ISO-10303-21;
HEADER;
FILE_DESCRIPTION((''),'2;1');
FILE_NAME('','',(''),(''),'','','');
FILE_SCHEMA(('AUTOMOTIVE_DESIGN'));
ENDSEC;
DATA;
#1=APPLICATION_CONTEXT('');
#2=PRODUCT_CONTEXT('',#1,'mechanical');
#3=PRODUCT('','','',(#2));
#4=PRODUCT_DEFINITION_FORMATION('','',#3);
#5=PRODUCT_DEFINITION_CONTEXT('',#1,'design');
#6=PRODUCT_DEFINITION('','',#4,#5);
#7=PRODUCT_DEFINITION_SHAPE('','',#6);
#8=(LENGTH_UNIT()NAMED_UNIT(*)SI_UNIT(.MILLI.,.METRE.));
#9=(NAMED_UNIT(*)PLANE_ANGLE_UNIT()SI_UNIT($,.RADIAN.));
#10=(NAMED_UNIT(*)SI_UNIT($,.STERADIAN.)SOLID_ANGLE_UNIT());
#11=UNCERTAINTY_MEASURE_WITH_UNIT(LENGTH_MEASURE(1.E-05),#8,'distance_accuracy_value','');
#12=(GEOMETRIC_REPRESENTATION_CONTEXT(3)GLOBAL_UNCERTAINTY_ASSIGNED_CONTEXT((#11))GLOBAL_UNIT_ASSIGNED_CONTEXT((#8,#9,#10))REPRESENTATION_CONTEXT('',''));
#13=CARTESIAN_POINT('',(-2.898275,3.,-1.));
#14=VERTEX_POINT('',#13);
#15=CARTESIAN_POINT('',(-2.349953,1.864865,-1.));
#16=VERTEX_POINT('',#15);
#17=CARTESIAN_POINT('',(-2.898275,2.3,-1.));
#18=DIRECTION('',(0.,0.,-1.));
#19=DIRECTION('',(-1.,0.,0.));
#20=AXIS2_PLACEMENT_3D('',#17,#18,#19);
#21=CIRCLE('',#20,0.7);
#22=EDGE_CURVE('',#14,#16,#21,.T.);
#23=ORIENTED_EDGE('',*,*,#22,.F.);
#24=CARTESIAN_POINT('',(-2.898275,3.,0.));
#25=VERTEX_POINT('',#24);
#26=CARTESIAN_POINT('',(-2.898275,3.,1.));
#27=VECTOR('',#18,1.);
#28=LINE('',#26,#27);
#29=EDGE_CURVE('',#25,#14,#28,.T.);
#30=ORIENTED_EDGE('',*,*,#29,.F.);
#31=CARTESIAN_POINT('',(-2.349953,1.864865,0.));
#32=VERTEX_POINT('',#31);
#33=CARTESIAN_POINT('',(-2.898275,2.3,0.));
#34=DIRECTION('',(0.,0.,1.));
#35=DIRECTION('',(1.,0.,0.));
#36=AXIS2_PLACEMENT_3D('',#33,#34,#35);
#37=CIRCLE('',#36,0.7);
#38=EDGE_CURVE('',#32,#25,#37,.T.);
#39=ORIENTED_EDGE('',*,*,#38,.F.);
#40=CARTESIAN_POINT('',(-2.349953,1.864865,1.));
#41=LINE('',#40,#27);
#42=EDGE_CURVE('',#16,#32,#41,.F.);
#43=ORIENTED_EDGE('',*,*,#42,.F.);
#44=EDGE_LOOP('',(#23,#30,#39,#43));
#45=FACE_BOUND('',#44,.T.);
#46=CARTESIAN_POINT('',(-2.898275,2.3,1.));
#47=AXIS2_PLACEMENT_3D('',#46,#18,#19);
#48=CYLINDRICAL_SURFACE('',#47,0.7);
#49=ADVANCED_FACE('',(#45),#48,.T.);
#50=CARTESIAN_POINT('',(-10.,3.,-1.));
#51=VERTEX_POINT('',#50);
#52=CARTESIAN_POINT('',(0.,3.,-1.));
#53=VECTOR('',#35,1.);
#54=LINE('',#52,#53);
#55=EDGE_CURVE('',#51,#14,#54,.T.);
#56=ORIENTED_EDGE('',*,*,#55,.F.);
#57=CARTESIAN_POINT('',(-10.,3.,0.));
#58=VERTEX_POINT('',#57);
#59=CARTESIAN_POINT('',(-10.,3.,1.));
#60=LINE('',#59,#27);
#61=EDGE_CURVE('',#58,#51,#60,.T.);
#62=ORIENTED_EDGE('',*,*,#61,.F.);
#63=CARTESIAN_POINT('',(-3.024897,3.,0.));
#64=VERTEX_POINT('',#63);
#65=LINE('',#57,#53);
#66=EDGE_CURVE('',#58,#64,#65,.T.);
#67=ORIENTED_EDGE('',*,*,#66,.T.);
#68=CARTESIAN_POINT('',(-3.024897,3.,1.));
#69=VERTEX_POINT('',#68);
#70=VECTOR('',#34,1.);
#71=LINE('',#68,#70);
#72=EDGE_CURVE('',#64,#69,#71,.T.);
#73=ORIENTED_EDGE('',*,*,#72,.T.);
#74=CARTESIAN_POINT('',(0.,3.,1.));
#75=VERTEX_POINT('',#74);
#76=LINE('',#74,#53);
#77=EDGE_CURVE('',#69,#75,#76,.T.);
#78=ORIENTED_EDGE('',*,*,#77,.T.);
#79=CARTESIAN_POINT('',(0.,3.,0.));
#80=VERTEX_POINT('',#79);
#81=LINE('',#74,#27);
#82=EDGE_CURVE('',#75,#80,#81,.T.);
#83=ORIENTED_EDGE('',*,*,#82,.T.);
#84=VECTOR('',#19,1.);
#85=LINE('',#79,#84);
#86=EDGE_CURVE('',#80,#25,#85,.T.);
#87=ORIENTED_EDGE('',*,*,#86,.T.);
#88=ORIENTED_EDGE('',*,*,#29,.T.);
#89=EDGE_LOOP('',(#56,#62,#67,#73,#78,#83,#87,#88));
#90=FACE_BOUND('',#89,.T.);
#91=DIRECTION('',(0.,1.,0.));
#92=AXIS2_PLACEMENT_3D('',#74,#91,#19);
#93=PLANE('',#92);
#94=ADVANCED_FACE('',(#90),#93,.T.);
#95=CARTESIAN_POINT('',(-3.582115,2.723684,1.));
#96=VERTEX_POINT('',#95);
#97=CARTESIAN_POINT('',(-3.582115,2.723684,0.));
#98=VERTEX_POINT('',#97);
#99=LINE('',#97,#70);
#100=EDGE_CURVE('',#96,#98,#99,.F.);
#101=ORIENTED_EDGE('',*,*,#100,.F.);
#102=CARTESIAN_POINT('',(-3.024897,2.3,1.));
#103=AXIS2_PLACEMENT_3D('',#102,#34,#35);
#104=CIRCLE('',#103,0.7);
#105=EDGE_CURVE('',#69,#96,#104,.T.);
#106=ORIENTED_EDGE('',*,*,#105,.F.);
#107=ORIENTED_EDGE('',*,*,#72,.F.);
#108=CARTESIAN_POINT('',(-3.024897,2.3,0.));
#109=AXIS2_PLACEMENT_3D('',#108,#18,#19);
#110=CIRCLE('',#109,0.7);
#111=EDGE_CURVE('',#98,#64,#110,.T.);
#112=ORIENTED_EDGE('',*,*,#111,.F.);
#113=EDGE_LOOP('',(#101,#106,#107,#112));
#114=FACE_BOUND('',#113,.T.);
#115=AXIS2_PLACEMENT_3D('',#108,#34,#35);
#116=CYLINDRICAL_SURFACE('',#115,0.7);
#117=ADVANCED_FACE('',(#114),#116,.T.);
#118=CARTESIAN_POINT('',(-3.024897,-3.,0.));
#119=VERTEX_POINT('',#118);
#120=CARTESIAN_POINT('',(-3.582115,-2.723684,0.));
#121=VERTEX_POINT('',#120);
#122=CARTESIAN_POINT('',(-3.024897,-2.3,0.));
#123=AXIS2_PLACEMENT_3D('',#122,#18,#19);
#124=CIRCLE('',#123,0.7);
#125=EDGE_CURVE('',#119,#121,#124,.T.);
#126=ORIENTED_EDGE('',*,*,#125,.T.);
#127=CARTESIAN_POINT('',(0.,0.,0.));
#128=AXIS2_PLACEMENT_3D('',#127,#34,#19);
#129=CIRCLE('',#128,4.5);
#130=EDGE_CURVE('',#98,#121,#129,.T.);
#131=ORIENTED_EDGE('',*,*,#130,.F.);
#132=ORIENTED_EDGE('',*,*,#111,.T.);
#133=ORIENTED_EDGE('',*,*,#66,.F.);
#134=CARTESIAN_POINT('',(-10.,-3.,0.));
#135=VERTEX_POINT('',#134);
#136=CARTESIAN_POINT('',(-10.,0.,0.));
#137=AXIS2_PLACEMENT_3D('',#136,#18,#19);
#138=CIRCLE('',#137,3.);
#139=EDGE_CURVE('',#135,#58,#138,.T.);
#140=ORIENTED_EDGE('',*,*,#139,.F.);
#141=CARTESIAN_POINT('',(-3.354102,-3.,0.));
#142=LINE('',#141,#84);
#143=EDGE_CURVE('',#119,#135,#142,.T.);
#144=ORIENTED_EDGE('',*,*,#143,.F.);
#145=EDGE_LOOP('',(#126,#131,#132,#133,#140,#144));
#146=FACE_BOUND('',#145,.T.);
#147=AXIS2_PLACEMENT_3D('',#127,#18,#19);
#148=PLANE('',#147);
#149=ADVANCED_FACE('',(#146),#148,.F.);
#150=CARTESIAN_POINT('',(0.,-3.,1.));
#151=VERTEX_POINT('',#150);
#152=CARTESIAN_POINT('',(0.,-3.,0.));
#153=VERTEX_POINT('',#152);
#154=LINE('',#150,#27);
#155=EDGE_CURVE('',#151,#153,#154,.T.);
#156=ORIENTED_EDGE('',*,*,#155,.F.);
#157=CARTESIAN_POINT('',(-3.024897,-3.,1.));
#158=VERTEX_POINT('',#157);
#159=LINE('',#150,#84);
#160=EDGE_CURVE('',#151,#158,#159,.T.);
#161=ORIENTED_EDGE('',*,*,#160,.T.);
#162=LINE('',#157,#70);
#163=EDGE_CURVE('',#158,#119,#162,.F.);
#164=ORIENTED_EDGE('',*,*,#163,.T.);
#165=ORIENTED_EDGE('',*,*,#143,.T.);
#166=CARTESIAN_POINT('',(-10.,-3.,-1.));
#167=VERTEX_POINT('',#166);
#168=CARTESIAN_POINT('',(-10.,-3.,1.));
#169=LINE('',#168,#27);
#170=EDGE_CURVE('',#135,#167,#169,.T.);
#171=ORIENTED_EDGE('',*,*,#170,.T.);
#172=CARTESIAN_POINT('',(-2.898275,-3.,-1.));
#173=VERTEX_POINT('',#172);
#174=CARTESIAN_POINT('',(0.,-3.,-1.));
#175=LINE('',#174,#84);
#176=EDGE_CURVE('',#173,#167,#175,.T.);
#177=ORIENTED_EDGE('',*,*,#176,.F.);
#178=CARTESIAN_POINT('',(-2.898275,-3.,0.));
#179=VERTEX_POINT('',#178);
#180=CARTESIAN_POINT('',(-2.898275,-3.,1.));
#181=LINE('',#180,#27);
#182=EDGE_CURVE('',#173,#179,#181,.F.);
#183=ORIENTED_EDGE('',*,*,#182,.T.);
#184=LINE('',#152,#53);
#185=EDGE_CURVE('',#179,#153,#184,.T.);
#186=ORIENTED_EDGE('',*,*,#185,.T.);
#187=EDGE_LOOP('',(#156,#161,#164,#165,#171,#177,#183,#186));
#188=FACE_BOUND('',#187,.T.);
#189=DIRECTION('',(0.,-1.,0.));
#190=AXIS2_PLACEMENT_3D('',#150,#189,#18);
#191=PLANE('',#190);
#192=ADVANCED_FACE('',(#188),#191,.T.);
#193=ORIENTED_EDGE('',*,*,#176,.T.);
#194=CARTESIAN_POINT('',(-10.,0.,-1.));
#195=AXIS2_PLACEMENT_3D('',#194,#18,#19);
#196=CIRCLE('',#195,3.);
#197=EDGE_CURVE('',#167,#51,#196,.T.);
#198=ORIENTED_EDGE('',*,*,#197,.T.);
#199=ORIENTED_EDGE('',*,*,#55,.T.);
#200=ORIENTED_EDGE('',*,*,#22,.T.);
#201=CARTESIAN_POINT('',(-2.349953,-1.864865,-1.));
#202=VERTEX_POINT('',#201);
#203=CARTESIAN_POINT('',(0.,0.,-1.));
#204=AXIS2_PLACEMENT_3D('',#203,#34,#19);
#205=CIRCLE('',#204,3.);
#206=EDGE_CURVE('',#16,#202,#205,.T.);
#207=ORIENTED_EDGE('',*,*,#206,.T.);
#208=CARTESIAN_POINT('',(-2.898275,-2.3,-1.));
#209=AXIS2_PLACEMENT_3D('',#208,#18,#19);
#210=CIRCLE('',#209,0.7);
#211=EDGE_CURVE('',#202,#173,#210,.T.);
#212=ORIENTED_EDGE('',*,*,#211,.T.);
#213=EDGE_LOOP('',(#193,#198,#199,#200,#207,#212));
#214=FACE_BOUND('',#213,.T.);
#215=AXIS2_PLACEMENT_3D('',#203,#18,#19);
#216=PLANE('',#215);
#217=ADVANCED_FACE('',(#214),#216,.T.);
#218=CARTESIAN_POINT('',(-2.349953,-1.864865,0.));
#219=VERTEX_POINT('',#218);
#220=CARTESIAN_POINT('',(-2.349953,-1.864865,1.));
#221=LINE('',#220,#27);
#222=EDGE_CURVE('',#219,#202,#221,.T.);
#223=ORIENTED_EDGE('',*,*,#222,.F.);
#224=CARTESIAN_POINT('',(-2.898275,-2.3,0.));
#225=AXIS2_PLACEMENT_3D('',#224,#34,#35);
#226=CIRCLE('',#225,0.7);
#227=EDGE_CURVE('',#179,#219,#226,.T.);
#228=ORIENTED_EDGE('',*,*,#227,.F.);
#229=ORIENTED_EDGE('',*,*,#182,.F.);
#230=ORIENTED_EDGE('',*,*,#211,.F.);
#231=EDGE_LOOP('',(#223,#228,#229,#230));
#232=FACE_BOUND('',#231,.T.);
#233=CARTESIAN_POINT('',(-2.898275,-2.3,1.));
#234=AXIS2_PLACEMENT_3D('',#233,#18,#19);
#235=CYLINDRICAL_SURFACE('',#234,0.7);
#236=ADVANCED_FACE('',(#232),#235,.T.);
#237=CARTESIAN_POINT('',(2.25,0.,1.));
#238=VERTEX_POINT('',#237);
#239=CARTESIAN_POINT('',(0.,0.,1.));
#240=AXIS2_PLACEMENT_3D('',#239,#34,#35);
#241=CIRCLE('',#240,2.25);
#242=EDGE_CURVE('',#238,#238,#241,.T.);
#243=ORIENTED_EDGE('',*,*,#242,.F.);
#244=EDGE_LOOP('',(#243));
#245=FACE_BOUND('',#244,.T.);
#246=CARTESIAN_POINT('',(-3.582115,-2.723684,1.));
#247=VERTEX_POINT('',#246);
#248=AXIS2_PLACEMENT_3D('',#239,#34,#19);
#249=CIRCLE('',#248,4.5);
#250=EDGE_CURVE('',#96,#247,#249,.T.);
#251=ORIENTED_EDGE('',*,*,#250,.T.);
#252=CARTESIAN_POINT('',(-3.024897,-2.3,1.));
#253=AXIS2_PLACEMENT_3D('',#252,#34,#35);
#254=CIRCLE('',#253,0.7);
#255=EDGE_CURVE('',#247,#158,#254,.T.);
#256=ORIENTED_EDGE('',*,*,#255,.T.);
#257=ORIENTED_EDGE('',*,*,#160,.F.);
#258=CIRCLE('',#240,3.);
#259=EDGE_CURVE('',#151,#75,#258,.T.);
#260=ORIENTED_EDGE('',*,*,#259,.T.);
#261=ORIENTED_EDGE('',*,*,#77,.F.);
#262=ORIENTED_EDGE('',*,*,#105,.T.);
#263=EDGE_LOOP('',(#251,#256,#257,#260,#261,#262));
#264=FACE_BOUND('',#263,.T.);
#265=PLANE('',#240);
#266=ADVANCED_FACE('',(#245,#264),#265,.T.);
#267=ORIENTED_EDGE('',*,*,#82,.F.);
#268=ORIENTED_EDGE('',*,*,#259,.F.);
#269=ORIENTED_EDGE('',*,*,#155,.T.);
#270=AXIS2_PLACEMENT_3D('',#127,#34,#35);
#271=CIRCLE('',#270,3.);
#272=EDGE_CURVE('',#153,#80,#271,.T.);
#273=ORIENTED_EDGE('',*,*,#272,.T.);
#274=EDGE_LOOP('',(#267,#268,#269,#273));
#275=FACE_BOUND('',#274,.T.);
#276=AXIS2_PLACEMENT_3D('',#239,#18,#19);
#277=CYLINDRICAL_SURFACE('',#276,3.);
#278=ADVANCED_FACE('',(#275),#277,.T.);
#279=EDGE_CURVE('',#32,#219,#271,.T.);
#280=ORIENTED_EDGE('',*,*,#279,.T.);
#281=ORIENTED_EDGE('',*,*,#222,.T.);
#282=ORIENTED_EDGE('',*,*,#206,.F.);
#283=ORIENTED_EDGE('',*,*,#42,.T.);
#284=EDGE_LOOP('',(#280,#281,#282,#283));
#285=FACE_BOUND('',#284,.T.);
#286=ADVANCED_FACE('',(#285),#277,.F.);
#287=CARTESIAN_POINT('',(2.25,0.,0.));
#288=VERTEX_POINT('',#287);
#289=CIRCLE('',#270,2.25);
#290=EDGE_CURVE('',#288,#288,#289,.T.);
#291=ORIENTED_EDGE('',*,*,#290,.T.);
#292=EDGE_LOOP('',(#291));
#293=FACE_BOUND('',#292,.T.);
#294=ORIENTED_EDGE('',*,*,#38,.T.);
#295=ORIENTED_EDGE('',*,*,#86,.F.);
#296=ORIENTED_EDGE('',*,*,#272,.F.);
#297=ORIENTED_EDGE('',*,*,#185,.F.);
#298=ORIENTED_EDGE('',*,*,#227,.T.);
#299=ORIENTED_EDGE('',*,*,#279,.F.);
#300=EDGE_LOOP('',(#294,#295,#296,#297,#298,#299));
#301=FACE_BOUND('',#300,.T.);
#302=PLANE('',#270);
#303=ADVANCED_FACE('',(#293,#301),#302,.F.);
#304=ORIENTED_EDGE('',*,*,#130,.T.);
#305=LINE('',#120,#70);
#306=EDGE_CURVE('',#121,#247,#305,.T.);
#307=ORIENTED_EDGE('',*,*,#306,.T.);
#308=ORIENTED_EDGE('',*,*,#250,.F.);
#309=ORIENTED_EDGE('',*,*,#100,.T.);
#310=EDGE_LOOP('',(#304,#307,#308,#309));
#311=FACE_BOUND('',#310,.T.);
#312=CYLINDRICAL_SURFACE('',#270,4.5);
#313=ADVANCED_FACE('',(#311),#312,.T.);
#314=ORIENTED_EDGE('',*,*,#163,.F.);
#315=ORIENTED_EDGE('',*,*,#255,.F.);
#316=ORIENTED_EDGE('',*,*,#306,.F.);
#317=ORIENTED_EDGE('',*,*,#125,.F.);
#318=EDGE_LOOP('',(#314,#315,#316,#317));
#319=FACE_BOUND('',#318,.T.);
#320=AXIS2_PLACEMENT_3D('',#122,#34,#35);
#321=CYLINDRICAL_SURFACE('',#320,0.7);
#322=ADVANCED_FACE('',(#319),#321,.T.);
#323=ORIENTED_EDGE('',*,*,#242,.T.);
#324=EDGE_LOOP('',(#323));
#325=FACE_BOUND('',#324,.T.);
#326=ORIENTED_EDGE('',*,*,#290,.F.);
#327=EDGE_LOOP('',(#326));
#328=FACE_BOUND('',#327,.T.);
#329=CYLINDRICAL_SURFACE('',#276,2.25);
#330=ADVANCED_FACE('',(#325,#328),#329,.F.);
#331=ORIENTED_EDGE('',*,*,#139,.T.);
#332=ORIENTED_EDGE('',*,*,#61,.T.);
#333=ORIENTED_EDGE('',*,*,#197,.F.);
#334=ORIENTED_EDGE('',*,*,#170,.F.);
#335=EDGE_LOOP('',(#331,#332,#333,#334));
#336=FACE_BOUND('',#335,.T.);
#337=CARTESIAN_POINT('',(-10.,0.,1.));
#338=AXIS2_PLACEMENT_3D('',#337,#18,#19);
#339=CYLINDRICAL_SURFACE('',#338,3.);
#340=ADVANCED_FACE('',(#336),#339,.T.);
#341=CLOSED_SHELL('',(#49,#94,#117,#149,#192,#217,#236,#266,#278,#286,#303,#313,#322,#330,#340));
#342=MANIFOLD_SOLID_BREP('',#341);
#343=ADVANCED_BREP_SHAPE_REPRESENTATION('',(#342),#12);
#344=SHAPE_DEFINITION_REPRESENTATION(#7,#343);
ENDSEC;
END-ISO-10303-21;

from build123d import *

# Parameters (mm, degrees)
SKETCH_1_R           = 3
SKETCH_1_R_2         = 2.25
EXTRUDE_1_DEPTH      = 1
EXTRUDE_2_DEPTH      = 1
EXTRUDE_2_DEPTH_BACK = 1
CUT_EXTRUDE_1_DEPTH  = 1
FILLET_START         = -2
FILLET_1_DEPTH       = 2
FILLET_2_R           = 0.7


with BuildPart() as part:
    # 草图1 → 凸台-拉伸1 (new body)
    with BuildSketch(Plane.XY):
        Circle(SKETCH_1_R)
        Circle(SKETCH_1_R_2, mode=Mode.SUBTRACT)
    extrude(amount=EXTRUDE_1_DEPTH)

    # 草图2 → 凸台-拉伸2 (add, two sides: drawn at the far end of the back side and taken through both)
    with BuildSketch(Plane(origin=(0, 0, 0), x_dir=(-1, 0, 0), z_dir=(0, 0, -1)).offset(-EXTRUDE_2_DEPTH_BACK)):
        with BuildLine():
            Line((0, -3), (10, -3))
            ThreePointArc((10, -3), (13, 0), (10, 3))
            Line((10, 3), (0, 3))
            ThreePointArc((0, 3), (3, 0), (0, -3))
        make_face()
    extrude(amount=EXTRUDE_2_DEPTH + EXTRUDE_2_DEPTH_BACK)

    # 草图3 → 切除-拉伸1 (cut)
    with BuildSketch(Plane(origin=(0, 0, 1), x_dir=(-1, 0, 0), z_dir=(0, 0, -1))):
        with BuildLine():
            Line((3.354101966, -3), (10, -3))
            ThreePointArc((10, -3), (13, 0), (10, 3))
            Line((10, 3), (3.354101966, 3))
            ThreePointArc((3.354101966, 3), (4.5, 0), (3.354101966, -3))
        make_face()
    extrude(amount=CUT_EXTRUDE_1_DEPTH, mode=Mode.SUBTRACT)

    # 圆角1: read off the stored shape, not the designer's step
    # 圆角1 outline → 圆角1 (cut)
    with BuildSketch(Plane.XY.offset(FILLET_START)):
        with BuildLine():
            ThreePointArc((0, -3), (-1.304876509, -2.701351013), (-2.349952986, -1.864864865))
            ThreePointArc((-2.349952986, -1.864864865), (-2.267960113, -2.604471185), (-2.898275349, -3))
            Line((-2.898275349, -3), (0, -3))
        make_face()
        with BuildLine():
            ThreePointArc((-2.898275349, 3), (-2.267960113, 2.604471185), (-2.349952986, 1.864864865))
            ThreePointArc((-2.349952986, 1.864864865), (-1.304876509, 2.701351013), (0, 3))
            Line((0, 3), (-2.898275349, 3))
        make_face()
    extrude(amount=FILLET_1_DEPTH, mode=Mode.SUBTRACT)

    # 圆角2
    fillet_2_edges = [part.edges().sort_by_distance(p)[0] for p in [
        (-3.354101966, 3, 0.5),
        (-3.354101966, -3, 0.5),
    ]]
    fillet(fillet_2_edges, radius=FILLET_2_R)


solid = part.part
